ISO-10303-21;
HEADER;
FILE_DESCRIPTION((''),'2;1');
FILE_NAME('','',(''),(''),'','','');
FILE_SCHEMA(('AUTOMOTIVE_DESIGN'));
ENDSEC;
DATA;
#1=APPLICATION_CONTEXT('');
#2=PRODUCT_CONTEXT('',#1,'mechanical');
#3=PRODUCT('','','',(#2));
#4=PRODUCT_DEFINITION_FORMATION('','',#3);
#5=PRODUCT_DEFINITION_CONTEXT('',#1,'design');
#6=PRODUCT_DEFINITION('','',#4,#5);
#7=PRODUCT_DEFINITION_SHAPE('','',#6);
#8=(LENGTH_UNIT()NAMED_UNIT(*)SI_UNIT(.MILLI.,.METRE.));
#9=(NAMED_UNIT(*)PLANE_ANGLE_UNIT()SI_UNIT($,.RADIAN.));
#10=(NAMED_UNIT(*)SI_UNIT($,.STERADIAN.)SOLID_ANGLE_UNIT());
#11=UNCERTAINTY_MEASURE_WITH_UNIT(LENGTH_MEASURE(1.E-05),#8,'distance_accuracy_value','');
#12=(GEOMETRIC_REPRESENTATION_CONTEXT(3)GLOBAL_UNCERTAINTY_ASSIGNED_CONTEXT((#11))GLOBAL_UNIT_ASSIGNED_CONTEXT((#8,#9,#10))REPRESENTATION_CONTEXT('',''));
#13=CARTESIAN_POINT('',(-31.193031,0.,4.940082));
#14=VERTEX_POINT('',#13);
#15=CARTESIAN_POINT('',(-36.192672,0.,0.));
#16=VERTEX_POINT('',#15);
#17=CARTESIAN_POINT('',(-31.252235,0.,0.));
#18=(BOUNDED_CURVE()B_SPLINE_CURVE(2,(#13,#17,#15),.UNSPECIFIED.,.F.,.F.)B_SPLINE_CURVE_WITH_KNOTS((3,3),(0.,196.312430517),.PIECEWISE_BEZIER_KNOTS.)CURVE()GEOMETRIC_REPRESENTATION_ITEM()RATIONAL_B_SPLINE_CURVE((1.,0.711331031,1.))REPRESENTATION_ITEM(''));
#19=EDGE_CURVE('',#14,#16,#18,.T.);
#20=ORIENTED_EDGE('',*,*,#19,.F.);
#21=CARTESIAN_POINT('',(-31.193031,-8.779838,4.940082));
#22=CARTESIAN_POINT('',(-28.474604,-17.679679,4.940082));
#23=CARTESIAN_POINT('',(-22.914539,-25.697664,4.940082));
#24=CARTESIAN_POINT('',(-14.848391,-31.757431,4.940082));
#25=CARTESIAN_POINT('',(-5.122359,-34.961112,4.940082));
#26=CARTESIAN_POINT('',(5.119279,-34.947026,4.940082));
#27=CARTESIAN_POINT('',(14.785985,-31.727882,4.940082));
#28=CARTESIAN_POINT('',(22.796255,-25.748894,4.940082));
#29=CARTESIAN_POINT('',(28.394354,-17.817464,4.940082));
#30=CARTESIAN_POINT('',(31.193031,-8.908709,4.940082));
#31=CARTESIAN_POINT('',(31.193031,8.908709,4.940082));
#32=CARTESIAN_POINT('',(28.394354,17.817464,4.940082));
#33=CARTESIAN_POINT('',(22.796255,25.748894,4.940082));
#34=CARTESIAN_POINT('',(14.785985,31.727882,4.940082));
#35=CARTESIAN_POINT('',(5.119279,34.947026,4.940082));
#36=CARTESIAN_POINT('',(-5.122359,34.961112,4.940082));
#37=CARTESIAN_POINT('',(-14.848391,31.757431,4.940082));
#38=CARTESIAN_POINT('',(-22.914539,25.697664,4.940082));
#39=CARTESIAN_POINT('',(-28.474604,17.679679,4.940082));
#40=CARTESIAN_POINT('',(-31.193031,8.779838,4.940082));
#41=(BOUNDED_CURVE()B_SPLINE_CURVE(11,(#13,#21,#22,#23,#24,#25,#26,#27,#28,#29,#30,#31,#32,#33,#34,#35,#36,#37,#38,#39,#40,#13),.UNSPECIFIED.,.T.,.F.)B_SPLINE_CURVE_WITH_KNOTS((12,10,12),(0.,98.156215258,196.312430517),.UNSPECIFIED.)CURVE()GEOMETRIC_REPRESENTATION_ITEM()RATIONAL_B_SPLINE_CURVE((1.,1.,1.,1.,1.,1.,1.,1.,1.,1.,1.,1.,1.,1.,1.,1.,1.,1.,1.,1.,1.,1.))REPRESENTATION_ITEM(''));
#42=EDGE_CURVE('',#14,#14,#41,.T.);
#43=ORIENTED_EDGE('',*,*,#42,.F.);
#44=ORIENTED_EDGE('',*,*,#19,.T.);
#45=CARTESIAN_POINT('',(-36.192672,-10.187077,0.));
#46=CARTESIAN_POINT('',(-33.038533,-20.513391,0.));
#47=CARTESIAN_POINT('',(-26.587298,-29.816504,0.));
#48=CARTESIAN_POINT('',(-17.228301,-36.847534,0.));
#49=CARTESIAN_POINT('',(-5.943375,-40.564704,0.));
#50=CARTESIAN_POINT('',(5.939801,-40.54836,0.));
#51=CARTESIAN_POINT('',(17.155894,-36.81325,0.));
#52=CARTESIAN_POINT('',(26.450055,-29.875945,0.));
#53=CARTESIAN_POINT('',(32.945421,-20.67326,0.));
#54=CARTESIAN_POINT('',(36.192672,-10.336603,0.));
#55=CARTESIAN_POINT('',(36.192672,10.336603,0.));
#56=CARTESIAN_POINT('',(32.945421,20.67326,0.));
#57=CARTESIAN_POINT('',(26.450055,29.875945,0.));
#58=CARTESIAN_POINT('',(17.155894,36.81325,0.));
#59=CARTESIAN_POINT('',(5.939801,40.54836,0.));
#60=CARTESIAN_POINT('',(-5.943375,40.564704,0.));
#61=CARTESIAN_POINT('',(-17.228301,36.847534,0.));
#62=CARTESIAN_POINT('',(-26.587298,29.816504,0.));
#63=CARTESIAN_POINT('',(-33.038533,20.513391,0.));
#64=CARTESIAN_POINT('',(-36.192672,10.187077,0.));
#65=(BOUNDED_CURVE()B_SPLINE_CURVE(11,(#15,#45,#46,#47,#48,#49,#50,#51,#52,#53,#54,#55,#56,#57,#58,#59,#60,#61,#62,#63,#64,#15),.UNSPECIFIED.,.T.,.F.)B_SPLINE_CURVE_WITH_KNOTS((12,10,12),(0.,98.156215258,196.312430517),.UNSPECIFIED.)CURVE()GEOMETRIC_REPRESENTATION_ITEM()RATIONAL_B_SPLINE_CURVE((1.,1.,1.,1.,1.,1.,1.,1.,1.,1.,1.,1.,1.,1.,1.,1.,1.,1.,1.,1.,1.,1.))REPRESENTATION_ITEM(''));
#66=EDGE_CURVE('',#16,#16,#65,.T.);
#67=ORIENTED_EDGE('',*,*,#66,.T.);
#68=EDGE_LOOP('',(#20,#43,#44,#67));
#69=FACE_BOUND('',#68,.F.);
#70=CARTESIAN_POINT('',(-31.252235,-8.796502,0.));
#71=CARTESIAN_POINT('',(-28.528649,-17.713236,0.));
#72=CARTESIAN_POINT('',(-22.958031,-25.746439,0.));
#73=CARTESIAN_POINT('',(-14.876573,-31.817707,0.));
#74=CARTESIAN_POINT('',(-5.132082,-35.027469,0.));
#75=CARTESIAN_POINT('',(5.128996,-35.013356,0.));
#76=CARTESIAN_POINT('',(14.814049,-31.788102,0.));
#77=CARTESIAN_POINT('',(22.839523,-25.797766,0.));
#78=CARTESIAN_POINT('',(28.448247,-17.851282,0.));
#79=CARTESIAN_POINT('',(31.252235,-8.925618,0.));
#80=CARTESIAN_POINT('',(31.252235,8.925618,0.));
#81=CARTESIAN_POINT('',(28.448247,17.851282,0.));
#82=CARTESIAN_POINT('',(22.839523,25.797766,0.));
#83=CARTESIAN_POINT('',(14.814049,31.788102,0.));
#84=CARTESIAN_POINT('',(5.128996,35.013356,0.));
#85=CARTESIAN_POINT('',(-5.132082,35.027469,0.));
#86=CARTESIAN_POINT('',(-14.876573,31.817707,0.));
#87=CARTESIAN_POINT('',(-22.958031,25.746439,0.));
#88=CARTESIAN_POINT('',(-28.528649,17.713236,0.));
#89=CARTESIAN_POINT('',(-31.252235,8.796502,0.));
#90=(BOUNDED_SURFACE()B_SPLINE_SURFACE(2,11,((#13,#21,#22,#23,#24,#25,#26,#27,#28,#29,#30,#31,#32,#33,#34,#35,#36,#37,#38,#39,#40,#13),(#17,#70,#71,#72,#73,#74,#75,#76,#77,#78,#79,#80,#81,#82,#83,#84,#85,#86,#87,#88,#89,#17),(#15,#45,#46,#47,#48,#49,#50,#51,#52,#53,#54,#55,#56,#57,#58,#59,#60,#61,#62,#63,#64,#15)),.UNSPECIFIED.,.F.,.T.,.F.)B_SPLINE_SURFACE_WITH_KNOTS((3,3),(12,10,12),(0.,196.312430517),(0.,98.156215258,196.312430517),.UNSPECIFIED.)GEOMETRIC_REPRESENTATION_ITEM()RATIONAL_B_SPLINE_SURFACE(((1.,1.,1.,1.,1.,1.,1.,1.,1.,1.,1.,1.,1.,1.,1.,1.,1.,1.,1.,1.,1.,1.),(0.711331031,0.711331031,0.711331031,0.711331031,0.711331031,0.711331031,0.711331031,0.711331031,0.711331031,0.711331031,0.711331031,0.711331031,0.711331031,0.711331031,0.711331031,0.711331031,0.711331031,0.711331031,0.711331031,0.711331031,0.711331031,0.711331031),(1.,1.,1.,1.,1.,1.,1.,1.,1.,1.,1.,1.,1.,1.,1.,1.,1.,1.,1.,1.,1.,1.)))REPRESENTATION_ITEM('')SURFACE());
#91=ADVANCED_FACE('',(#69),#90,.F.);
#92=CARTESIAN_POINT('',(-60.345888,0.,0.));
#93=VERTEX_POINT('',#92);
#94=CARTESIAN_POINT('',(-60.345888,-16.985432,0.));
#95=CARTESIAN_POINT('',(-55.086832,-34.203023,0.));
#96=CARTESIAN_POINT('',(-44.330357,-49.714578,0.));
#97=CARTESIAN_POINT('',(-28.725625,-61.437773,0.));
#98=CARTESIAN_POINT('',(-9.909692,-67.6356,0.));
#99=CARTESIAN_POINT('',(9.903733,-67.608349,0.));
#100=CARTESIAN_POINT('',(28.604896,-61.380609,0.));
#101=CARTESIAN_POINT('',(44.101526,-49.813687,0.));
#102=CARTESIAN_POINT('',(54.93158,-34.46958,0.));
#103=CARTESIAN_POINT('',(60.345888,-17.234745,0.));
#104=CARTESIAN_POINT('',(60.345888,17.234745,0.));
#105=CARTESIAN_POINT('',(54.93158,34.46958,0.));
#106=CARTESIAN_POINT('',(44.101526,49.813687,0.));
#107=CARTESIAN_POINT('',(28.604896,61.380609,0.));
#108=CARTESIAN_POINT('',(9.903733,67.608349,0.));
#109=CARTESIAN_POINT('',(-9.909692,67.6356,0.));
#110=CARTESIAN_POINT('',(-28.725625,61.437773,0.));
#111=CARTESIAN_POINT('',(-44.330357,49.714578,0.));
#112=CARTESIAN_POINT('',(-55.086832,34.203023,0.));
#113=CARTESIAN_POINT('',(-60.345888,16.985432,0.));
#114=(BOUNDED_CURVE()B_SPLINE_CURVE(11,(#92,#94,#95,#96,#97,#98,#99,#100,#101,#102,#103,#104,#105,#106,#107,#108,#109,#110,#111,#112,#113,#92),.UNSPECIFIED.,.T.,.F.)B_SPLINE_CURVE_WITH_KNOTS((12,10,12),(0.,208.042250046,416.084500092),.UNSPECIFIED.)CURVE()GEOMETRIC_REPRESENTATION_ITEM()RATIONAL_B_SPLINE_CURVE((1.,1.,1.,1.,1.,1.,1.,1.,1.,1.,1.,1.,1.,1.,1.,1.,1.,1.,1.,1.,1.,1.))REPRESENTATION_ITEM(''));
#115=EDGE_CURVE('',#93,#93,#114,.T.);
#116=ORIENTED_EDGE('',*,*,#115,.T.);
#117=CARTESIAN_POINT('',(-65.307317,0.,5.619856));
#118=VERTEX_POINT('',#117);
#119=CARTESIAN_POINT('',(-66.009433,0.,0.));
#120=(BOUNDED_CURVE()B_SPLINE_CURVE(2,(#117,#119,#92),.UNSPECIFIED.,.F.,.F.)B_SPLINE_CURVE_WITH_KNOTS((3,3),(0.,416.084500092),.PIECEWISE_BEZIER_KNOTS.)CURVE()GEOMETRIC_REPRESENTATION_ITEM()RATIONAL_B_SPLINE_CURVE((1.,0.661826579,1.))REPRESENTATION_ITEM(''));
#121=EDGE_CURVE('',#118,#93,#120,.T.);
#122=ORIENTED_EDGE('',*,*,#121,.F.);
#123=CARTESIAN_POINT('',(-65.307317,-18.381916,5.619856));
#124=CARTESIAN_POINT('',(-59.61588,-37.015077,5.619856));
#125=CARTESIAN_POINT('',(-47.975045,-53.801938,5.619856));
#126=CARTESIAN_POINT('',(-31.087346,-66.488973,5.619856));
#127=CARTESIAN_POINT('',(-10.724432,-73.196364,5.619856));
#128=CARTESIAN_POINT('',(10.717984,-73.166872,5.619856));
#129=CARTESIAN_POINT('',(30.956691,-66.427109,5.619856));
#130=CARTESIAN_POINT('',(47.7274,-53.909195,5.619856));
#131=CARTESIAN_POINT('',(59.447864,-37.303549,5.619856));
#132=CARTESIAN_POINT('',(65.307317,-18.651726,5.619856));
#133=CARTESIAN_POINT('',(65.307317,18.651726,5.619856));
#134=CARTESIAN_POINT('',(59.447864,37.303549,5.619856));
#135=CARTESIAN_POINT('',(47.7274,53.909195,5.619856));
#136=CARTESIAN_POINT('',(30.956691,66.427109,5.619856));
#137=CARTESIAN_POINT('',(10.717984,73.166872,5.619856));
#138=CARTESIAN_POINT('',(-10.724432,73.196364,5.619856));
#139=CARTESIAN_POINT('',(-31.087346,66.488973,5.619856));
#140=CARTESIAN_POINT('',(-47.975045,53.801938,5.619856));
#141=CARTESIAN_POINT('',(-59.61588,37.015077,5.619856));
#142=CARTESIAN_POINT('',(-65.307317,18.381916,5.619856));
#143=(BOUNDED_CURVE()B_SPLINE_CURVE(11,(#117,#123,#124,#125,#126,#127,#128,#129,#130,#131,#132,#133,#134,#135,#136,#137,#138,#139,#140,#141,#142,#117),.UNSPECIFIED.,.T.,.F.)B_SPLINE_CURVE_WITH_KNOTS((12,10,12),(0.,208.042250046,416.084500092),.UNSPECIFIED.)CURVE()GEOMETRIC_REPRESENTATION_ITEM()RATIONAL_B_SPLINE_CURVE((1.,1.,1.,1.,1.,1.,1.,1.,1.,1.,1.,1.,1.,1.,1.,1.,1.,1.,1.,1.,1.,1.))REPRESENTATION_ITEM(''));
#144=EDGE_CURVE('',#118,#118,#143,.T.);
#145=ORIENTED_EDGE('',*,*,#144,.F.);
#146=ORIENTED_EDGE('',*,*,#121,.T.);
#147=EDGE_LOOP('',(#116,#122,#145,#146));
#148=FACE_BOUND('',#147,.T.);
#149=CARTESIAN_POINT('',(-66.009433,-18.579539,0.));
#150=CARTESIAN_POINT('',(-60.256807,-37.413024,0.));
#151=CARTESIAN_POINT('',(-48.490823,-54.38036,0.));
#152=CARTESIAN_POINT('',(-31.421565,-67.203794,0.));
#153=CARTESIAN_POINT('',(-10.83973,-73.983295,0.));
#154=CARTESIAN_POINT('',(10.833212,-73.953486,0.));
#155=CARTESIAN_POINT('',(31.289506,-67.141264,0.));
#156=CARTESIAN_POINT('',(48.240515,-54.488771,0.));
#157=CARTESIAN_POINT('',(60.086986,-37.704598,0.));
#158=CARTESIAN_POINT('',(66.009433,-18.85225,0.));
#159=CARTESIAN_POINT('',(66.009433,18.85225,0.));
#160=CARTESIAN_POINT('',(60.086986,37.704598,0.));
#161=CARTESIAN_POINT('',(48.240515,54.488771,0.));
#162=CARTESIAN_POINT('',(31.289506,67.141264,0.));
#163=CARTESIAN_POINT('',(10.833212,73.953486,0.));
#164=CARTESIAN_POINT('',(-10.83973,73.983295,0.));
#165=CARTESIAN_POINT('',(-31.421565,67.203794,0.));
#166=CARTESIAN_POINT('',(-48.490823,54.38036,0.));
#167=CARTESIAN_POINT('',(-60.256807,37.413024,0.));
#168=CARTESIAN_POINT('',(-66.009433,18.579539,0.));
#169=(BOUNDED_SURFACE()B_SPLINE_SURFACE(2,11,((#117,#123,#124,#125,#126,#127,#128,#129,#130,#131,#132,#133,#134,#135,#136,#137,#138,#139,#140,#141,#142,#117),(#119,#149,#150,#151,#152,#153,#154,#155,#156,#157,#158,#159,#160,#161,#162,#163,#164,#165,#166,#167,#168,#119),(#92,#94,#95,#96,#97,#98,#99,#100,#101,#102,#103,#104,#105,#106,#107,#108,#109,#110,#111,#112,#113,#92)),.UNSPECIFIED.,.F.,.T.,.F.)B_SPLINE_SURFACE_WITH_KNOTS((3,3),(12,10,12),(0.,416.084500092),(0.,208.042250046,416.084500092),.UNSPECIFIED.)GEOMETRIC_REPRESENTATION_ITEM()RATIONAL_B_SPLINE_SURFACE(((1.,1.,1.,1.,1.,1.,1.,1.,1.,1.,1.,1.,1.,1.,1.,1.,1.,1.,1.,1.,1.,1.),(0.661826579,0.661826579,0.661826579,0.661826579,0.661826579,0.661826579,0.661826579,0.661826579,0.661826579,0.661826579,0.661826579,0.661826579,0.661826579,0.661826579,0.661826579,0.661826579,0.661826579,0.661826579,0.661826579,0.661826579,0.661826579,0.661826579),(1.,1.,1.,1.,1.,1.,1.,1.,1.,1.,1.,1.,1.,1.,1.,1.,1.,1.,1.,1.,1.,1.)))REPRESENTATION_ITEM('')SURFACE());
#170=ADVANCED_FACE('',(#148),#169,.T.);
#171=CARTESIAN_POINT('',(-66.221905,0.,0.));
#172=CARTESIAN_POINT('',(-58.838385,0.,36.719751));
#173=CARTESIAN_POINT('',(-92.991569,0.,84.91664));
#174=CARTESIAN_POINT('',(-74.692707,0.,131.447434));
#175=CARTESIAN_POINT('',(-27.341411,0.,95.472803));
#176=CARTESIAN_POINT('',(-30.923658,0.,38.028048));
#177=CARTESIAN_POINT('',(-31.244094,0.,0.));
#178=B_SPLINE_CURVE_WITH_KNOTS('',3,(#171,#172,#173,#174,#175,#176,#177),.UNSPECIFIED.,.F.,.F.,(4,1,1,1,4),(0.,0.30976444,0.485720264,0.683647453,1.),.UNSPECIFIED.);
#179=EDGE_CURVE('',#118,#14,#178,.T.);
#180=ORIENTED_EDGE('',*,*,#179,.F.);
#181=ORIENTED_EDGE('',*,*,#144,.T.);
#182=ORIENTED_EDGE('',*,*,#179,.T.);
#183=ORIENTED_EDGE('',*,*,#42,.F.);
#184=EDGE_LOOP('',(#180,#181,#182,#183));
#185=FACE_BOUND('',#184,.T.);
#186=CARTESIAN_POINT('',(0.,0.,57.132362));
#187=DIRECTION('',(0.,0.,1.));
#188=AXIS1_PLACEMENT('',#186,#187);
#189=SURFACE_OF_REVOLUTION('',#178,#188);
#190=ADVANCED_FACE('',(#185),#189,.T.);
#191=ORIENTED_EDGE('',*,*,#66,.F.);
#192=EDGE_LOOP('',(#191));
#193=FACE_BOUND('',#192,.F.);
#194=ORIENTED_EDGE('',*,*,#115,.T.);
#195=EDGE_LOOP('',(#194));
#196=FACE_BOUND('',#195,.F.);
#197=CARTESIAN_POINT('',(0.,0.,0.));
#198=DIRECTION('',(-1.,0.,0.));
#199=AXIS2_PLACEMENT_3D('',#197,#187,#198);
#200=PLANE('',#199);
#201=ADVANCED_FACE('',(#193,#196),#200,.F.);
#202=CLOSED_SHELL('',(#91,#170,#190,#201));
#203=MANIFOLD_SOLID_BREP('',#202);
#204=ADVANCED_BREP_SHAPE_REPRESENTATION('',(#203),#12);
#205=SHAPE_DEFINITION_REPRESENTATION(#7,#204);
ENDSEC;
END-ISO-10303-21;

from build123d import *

# Parameters (mm, degrees)
F2_R = 5


with BuildPart() as f1:
    # F0 (on Front) → F1 (revolve)
    with BuildSketch(Plane.XZ):
        with BuildLine():
            add(Edge.make_bspline(
                [(-66.2219049335, 0), (-58.8383853396, 36.7197514066), (-92.9915691084, 84.9166402133), (-74.692706734, 131.4474340293), (-27.3414111183, 95.4728029291), (-30.9236581175, 38.028048283), (-31.2440937071, 0)],
                knots=[0, 0, 0, 0, 0.3097644403, 0.4857202638, 0.6836474525, 1, 1, 1, 1], degree=3))
            Line((-66.2219049335, 0), (-31.2440937071, 0))
        make_face()
    revolve(axis=Axis((0, 0, 57.1323619224), (0, 0, 1)))

    # F2
    f2_edges = [f1.edges().sort_by_distance(p)[0] for p in [
        (66.221905, 0, 0),
        (31.244094, 0, 0),
    ]]
    fillet(f2_edges, radius=F2_R)


solid = f1.part
